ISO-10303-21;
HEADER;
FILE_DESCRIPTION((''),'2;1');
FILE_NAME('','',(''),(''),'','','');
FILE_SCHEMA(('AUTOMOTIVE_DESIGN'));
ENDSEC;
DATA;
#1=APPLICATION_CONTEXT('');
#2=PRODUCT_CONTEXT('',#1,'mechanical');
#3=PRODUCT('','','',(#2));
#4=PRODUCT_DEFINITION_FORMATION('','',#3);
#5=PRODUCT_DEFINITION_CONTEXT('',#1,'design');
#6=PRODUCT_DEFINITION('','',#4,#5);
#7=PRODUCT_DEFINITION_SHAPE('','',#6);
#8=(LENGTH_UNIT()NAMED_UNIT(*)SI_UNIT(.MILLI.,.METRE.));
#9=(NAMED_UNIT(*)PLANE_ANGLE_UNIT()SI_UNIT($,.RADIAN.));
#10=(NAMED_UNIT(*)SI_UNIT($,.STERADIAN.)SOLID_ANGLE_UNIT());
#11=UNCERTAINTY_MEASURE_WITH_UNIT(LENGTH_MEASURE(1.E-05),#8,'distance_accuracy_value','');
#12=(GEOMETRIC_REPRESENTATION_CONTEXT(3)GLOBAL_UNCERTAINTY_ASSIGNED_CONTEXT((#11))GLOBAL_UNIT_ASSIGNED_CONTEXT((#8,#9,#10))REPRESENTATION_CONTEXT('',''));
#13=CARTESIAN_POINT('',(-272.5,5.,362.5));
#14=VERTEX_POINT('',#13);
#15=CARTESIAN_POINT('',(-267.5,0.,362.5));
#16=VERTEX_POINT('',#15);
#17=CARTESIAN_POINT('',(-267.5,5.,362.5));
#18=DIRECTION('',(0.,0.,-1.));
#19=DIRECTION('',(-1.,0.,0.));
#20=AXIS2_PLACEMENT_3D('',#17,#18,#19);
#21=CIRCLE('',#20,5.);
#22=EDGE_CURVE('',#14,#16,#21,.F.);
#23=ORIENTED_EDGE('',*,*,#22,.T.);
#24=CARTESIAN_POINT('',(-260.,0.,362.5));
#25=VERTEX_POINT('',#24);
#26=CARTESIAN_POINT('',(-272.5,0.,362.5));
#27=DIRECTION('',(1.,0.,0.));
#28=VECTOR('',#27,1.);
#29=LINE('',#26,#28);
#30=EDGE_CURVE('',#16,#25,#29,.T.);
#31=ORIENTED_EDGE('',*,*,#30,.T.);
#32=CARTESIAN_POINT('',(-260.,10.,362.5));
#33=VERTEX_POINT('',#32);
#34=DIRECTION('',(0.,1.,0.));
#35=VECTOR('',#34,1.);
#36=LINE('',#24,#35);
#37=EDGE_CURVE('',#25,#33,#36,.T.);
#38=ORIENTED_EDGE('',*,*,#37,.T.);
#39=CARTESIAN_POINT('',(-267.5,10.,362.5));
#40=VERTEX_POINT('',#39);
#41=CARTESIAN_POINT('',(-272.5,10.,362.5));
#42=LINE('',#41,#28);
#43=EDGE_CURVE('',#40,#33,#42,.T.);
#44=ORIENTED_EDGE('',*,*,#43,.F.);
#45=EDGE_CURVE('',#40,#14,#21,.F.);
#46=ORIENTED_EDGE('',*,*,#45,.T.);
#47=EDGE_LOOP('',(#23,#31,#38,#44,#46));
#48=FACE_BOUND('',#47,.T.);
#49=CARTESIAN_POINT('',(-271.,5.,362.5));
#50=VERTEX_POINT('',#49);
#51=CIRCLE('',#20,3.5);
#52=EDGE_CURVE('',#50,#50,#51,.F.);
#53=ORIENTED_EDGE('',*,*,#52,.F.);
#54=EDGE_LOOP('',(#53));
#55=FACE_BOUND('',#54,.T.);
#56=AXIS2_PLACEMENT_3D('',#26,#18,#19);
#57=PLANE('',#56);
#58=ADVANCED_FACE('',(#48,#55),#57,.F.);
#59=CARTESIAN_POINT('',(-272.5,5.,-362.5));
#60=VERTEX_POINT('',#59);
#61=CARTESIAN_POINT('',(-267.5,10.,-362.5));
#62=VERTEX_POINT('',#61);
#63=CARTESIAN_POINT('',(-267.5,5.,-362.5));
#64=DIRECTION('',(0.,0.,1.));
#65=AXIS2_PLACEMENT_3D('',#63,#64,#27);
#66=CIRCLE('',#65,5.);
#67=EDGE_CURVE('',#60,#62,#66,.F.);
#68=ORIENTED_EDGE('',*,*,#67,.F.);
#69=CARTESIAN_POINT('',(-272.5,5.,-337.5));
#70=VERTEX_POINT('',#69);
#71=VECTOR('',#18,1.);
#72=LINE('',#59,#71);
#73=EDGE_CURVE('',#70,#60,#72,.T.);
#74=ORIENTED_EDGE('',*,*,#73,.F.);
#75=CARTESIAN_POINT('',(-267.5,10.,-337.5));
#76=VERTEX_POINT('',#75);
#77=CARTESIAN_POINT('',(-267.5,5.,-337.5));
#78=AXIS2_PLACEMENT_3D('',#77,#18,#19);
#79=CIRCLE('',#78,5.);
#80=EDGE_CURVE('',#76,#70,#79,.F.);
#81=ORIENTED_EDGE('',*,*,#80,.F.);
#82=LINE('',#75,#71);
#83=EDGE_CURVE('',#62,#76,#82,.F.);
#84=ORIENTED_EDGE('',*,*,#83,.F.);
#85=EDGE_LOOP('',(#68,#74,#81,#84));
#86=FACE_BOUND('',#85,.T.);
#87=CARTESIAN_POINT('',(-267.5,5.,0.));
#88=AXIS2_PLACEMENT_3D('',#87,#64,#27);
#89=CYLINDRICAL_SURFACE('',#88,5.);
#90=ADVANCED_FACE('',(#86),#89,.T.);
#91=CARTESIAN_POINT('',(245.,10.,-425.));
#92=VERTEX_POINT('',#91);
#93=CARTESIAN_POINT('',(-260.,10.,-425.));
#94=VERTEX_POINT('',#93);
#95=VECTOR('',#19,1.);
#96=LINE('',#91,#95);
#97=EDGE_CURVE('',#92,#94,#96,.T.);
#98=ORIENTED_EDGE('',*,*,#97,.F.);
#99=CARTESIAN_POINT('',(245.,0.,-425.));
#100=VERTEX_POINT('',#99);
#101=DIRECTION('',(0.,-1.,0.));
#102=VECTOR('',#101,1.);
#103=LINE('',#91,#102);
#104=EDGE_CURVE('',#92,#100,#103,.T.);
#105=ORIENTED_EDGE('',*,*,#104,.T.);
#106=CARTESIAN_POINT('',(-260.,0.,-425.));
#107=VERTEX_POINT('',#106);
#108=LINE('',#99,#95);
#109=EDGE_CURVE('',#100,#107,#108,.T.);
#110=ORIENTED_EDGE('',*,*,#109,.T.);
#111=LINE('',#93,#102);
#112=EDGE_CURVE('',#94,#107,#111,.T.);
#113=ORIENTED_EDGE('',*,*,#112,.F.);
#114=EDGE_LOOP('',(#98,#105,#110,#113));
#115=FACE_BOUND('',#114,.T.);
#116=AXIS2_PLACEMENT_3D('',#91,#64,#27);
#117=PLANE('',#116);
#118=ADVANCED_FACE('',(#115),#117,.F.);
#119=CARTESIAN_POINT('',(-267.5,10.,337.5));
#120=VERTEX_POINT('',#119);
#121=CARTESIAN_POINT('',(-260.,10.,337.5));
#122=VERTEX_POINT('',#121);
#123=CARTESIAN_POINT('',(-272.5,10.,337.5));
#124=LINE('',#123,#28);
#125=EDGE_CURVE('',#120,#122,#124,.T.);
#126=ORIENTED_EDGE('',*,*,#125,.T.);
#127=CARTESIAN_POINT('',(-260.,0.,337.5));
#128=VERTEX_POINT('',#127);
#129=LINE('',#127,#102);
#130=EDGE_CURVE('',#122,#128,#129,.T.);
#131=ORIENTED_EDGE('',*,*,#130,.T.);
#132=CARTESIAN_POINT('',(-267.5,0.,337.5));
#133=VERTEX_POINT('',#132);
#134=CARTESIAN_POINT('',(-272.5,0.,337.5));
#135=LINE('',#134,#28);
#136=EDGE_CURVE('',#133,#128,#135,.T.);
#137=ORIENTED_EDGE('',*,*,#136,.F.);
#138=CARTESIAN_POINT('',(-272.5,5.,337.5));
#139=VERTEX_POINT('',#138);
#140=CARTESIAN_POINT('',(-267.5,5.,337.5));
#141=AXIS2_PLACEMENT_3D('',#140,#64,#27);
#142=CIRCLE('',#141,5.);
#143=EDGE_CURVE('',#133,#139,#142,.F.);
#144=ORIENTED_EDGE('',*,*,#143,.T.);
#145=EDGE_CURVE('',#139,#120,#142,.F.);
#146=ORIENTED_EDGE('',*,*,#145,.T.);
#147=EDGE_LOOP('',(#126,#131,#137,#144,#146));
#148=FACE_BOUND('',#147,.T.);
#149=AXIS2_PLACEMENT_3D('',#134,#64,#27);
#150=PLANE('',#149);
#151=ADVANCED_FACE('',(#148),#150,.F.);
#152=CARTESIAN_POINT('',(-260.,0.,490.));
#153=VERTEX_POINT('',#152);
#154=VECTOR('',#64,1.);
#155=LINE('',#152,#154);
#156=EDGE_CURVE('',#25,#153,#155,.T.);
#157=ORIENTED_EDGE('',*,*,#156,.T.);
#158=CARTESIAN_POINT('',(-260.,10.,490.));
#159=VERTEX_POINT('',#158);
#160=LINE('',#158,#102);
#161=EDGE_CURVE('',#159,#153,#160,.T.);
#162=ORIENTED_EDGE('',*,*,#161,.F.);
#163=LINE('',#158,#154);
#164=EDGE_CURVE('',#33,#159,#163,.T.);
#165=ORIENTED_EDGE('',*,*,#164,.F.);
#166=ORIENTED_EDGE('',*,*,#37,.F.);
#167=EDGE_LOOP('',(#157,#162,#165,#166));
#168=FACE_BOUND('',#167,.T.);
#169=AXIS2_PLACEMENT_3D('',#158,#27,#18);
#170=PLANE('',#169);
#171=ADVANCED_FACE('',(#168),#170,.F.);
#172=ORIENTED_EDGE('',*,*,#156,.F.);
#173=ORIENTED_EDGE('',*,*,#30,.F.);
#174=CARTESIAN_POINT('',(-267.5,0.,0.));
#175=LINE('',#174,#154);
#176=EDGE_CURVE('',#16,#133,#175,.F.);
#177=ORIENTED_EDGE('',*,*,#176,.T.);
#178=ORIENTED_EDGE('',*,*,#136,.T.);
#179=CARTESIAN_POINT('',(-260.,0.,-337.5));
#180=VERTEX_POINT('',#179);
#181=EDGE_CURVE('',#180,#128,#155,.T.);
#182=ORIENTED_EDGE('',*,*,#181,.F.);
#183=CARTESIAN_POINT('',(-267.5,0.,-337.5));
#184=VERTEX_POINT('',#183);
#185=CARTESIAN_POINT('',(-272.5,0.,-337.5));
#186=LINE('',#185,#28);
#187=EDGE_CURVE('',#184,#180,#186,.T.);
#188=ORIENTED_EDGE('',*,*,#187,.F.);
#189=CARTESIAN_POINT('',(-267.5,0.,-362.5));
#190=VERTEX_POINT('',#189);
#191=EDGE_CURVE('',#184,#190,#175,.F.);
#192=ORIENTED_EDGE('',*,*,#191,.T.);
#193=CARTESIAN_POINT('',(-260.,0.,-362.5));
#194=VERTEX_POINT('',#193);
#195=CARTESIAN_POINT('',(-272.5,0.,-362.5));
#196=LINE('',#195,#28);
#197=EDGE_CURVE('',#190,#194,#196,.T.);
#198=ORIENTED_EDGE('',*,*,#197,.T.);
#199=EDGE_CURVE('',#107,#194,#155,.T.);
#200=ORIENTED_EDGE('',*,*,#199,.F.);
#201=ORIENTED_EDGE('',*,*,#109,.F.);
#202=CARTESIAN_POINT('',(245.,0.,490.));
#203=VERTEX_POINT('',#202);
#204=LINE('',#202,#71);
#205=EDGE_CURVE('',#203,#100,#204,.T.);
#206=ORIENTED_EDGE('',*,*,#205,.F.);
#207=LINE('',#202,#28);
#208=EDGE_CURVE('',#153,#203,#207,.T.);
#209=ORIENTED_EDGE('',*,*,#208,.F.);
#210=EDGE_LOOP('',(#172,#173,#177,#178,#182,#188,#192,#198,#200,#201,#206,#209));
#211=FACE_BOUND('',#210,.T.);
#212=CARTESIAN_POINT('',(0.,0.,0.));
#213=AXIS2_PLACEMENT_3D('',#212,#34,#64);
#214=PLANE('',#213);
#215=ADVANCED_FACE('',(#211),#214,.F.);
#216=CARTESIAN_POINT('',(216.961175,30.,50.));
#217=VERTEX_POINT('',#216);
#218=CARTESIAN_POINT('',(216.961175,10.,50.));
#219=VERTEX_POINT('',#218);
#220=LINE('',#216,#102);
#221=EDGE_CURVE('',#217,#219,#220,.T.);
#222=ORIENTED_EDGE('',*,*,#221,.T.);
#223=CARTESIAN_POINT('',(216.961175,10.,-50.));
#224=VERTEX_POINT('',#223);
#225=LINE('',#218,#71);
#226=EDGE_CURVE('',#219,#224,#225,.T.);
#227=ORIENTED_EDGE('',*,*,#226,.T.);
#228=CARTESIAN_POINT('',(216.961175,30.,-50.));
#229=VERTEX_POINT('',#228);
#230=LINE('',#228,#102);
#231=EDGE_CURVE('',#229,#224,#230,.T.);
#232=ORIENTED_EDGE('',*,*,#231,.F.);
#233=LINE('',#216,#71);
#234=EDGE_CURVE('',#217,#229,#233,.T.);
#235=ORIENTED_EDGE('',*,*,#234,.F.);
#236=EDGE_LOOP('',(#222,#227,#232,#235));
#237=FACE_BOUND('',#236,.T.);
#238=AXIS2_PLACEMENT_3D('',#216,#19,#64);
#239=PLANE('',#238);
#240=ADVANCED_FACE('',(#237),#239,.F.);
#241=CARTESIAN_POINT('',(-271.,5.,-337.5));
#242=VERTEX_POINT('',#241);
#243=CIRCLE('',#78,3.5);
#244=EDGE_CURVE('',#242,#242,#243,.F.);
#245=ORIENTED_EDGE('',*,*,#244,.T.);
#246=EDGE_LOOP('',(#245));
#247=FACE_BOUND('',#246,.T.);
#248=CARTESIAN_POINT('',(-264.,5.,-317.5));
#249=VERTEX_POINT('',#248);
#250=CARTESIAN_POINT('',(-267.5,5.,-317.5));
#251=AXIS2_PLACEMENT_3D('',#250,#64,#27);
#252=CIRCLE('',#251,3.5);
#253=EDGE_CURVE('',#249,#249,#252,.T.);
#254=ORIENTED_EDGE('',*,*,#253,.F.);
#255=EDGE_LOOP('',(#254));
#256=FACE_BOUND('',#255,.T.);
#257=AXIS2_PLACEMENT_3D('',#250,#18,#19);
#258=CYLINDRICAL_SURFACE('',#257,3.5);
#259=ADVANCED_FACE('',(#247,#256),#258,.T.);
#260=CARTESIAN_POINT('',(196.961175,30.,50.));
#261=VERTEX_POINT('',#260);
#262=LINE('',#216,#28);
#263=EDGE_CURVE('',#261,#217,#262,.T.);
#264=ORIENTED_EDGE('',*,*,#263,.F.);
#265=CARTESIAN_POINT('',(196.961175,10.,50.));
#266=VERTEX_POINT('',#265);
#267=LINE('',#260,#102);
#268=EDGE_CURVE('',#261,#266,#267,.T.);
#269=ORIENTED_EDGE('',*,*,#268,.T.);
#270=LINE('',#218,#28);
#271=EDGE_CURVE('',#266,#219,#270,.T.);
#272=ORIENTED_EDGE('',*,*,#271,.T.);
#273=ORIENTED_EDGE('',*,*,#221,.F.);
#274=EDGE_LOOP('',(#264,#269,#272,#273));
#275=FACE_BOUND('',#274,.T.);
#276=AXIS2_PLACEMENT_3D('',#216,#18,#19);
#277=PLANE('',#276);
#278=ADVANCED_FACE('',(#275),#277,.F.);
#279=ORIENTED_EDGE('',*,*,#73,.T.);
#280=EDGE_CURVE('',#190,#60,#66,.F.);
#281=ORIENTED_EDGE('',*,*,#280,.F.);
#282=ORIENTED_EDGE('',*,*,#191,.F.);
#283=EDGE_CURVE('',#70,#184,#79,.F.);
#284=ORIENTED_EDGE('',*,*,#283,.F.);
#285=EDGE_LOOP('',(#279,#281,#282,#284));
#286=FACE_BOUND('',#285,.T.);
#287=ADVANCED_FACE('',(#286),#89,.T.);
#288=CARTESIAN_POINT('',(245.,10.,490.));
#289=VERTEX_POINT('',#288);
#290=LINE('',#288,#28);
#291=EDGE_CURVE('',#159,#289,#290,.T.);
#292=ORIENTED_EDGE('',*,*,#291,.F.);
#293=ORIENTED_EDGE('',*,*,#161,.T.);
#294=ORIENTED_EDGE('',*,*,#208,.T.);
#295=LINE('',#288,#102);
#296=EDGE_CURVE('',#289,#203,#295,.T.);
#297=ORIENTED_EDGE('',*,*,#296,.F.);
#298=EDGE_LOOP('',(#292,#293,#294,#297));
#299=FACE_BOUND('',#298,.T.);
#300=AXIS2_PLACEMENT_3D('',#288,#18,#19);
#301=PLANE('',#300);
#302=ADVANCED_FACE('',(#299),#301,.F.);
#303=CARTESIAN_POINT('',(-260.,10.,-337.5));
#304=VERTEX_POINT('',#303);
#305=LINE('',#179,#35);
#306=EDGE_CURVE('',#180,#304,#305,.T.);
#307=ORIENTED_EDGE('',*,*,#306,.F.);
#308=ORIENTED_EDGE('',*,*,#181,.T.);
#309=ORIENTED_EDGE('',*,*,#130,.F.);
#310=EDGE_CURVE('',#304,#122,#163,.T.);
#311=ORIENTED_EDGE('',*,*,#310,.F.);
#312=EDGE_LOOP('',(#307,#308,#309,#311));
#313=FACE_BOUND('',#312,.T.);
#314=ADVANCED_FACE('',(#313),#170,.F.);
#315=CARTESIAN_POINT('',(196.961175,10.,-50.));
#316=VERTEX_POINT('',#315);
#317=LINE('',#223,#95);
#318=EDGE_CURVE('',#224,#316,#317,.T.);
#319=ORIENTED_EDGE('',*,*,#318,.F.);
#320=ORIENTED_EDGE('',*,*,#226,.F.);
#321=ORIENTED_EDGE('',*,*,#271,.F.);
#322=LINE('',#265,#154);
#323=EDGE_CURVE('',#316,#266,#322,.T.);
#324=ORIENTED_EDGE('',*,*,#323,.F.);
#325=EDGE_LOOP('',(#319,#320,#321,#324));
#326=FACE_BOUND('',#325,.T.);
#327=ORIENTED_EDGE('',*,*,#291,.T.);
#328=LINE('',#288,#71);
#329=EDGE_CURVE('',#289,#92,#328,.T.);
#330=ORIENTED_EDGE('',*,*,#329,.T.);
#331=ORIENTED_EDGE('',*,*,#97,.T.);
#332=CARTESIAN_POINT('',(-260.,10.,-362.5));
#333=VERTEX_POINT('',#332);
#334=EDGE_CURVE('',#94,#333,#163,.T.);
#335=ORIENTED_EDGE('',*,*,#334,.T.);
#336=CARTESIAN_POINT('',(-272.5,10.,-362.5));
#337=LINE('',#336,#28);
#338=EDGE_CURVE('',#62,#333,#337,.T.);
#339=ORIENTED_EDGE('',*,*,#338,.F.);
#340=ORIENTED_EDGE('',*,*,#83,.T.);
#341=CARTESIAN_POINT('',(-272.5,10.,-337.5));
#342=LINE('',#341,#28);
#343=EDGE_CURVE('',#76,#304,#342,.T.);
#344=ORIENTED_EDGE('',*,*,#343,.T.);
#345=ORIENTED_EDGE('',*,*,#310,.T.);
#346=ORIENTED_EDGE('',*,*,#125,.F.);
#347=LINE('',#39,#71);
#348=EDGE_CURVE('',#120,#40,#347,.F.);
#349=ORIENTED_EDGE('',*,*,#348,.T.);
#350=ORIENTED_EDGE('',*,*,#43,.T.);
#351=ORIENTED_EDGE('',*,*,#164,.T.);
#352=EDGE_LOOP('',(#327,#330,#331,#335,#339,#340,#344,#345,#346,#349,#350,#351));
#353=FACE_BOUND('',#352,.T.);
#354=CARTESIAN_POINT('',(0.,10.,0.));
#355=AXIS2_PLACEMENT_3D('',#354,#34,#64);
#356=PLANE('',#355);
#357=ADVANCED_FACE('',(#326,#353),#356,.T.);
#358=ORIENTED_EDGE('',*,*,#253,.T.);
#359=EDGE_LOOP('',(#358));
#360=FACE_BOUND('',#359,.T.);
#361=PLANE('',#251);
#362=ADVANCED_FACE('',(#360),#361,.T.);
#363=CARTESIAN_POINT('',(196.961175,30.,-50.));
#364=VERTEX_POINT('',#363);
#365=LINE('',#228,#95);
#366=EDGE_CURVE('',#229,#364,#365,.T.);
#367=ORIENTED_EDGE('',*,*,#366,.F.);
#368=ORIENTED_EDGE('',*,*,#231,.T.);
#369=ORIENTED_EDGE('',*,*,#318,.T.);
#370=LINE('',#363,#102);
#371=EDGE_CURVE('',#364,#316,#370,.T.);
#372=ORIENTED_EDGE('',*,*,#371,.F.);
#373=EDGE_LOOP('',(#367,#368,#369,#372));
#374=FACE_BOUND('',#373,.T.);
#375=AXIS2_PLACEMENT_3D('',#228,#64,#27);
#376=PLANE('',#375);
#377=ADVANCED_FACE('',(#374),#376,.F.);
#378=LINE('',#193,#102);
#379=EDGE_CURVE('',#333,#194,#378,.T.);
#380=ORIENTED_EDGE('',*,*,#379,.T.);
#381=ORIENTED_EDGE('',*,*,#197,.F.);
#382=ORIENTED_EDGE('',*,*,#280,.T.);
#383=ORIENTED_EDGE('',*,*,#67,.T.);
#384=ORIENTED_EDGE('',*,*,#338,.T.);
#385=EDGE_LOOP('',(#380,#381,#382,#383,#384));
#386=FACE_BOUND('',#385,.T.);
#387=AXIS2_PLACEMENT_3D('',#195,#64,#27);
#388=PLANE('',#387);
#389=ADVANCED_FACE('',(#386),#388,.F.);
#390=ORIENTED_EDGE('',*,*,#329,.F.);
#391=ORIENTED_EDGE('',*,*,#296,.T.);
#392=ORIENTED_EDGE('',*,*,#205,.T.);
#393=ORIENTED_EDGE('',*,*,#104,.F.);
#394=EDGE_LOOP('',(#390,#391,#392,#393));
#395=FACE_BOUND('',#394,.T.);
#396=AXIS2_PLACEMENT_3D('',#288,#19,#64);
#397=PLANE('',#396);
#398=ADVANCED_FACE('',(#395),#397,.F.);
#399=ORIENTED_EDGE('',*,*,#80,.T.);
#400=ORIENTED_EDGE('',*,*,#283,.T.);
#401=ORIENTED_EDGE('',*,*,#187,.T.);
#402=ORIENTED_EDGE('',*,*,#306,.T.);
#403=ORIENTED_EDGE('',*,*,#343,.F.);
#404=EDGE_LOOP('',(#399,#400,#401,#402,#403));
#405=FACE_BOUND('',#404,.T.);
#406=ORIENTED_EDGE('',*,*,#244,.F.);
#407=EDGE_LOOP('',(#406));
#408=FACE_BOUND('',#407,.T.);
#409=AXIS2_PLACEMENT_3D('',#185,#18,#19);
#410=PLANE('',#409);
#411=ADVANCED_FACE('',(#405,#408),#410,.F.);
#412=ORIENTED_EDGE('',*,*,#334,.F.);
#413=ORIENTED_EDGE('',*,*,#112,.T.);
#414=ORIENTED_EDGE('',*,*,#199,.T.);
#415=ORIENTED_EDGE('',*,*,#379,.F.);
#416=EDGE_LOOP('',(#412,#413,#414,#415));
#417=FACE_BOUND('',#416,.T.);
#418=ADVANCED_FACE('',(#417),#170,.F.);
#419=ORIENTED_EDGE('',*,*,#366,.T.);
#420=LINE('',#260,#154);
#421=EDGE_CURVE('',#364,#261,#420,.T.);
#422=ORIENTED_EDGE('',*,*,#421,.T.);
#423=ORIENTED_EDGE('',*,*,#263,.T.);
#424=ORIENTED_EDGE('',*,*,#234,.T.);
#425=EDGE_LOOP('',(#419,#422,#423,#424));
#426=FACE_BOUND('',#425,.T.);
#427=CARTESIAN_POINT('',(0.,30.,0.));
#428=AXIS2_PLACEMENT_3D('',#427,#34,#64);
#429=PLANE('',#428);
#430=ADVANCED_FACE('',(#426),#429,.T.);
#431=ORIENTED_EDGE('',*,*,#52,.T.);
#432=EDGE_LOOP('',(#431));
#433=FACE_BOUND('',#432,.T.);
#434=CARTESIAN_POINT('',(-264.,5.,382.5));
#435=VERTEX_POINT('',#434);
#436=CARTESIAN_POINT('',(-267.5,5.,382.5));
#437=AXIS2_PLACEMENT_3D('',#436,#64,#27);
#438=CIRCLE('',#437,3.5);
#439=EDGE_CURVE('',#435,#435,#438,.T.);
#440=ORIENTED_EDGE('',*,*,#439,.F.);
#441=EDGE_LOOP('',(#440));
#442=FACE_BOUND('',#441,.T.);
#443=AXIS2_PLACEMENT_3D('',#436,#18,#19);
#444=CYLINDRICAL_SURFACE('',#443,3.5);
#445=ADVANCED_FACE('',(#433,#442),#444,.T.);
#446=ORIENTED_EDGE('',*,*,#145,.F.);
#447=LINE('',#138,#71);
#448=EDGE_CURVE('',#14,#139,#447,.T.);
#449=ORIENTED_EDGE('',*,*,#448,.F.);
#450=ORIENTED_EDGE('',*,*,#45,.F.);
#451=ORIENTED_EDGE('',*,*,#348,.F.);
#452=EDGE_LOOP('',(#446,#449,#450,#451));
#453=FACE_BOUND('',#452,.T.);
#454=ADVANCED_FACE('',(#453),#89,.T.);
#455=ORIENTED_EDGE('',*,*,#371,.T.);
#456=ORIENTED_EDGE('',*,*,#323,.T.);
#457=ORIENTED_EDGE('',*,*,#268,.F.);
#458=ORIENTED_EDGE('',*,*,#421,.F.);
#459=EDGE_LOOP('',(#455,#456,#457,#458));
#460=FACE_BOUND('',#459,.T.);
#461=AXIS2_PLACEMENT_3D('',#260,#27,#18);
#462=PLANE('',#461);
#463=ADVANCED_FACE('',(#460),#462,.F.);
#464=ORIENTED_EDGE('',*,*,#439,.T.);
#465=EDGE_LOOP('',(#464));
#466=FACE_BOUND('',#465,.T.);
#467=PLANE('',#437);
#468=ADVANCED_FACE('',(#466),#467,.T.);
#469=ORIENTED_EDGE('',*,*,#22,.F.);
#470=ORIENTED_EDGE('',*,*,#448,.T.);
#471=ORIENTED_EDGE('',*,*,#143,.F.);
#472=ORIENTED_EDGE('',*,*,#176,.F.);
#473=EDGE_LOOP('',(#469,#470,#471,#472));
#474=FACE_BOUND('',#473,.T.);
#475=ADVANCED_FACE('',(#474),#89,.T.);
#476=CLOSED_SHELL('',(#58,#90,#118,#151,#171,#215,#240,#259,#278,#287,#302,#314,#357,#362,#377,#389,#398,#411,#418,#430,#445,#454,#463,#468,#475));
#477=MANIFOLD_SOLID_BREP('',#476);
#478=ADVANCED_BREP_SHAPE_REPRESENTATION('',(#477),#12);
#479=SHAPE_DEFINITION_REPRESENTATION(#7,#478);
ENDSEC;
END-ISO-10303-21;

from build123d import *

# Parameters (mm, degrees)
SKETCH1_W           = 505
SKETCH1_H           = 915
BOSS_EXTRUDE1_DEPTH = 10
SKETCH2_W           = 25
SKETCH2_H           = 10
BOSS_EXTRUDE2_DEPTH = 12.5
SKETCH3_R           = 3.5
BOSS_EXTRUDE3_DEPTH = 20
LPATTERN1_COUNT     = 2
LPATTERN1_PITCH     = 700
FILLET1_R           = 5
SKETCH4_W           = 20
SKETCH4_H           = 100
BOSS_EXTRUDE4_DEPTH = 20


with BuildPart() as part:
    # Sketch1 → Boss-Extrude1 (new body)
    with BuildSketch(Plane(origin=(0, 0, 0), x_dir=(1, 0, 0), z_dir=(0, 1, 0))):
        with Locations((-7.5, -32.5)):
            Rectangle(SKETCH1_W, SKETCH1_H)
    extrude(amount=BOSS_EXTRUDE1_DEPTH)

    # Sketch2 → Boss-Extrude2 (add)
    with BuildSketch(Plane.ZY.offset(260)):
        with Locations((-350, 5)):
            Rectangle(SKETCH2_W, SKETCH2_H)
        with Locations((350, 5)):
            Rectangle(SKETCH2_W, SKETCH2_H)
    extrude(amount=BOSS_EXTRUDE2_DEPTH)

    # Sketch3 → Boss-Extrude3 (add)
    with BuildSketch(Plane.XY.offset(-337.5)):
        with Locations(Location((-267.5, 5, 0), (0, 0, 180))):
            Circle(SKETCH3_R)
    boss_extrude3 = extrude(amount=BOSS_EXTRUDE3_DEPTH)

    # LPattern1: Boss-Extrude3 ×2
    with Locations(*[(0, 0, i * LPATTERN1_PITCH) for i in range(1, LPATTERN1_COUNT)]):
        add(boss_extrude3)

    # Fillet1
    fillet1_edges = [part.edges().sort_by_distance(p)[0] for p in [
        (-272.5, 0, 350),
        (-272.5, 10, 350),
        (-272.5, 0, -350),
        (-272.5, 10, -350),
    ]]
    fillet(fillet1_edges, radius=FILLET1_R - 0.0001)  # a hair under: the kernel refuses the full size

    # Sketch4 → Boss-Extrude4 (add)
    with BuildSketch(Plane(origin=(0, 10, 0), x_dir=(1, 0, 0), z_dir=(0, 1, 0))):
        with Locations((206.961175434, 0)):
            Rectangle(SKETCH4_W, SKETCH4_H)
    extrude(amount=BOSS_EXTRUDE4_DEPTH)


solid = part.part
